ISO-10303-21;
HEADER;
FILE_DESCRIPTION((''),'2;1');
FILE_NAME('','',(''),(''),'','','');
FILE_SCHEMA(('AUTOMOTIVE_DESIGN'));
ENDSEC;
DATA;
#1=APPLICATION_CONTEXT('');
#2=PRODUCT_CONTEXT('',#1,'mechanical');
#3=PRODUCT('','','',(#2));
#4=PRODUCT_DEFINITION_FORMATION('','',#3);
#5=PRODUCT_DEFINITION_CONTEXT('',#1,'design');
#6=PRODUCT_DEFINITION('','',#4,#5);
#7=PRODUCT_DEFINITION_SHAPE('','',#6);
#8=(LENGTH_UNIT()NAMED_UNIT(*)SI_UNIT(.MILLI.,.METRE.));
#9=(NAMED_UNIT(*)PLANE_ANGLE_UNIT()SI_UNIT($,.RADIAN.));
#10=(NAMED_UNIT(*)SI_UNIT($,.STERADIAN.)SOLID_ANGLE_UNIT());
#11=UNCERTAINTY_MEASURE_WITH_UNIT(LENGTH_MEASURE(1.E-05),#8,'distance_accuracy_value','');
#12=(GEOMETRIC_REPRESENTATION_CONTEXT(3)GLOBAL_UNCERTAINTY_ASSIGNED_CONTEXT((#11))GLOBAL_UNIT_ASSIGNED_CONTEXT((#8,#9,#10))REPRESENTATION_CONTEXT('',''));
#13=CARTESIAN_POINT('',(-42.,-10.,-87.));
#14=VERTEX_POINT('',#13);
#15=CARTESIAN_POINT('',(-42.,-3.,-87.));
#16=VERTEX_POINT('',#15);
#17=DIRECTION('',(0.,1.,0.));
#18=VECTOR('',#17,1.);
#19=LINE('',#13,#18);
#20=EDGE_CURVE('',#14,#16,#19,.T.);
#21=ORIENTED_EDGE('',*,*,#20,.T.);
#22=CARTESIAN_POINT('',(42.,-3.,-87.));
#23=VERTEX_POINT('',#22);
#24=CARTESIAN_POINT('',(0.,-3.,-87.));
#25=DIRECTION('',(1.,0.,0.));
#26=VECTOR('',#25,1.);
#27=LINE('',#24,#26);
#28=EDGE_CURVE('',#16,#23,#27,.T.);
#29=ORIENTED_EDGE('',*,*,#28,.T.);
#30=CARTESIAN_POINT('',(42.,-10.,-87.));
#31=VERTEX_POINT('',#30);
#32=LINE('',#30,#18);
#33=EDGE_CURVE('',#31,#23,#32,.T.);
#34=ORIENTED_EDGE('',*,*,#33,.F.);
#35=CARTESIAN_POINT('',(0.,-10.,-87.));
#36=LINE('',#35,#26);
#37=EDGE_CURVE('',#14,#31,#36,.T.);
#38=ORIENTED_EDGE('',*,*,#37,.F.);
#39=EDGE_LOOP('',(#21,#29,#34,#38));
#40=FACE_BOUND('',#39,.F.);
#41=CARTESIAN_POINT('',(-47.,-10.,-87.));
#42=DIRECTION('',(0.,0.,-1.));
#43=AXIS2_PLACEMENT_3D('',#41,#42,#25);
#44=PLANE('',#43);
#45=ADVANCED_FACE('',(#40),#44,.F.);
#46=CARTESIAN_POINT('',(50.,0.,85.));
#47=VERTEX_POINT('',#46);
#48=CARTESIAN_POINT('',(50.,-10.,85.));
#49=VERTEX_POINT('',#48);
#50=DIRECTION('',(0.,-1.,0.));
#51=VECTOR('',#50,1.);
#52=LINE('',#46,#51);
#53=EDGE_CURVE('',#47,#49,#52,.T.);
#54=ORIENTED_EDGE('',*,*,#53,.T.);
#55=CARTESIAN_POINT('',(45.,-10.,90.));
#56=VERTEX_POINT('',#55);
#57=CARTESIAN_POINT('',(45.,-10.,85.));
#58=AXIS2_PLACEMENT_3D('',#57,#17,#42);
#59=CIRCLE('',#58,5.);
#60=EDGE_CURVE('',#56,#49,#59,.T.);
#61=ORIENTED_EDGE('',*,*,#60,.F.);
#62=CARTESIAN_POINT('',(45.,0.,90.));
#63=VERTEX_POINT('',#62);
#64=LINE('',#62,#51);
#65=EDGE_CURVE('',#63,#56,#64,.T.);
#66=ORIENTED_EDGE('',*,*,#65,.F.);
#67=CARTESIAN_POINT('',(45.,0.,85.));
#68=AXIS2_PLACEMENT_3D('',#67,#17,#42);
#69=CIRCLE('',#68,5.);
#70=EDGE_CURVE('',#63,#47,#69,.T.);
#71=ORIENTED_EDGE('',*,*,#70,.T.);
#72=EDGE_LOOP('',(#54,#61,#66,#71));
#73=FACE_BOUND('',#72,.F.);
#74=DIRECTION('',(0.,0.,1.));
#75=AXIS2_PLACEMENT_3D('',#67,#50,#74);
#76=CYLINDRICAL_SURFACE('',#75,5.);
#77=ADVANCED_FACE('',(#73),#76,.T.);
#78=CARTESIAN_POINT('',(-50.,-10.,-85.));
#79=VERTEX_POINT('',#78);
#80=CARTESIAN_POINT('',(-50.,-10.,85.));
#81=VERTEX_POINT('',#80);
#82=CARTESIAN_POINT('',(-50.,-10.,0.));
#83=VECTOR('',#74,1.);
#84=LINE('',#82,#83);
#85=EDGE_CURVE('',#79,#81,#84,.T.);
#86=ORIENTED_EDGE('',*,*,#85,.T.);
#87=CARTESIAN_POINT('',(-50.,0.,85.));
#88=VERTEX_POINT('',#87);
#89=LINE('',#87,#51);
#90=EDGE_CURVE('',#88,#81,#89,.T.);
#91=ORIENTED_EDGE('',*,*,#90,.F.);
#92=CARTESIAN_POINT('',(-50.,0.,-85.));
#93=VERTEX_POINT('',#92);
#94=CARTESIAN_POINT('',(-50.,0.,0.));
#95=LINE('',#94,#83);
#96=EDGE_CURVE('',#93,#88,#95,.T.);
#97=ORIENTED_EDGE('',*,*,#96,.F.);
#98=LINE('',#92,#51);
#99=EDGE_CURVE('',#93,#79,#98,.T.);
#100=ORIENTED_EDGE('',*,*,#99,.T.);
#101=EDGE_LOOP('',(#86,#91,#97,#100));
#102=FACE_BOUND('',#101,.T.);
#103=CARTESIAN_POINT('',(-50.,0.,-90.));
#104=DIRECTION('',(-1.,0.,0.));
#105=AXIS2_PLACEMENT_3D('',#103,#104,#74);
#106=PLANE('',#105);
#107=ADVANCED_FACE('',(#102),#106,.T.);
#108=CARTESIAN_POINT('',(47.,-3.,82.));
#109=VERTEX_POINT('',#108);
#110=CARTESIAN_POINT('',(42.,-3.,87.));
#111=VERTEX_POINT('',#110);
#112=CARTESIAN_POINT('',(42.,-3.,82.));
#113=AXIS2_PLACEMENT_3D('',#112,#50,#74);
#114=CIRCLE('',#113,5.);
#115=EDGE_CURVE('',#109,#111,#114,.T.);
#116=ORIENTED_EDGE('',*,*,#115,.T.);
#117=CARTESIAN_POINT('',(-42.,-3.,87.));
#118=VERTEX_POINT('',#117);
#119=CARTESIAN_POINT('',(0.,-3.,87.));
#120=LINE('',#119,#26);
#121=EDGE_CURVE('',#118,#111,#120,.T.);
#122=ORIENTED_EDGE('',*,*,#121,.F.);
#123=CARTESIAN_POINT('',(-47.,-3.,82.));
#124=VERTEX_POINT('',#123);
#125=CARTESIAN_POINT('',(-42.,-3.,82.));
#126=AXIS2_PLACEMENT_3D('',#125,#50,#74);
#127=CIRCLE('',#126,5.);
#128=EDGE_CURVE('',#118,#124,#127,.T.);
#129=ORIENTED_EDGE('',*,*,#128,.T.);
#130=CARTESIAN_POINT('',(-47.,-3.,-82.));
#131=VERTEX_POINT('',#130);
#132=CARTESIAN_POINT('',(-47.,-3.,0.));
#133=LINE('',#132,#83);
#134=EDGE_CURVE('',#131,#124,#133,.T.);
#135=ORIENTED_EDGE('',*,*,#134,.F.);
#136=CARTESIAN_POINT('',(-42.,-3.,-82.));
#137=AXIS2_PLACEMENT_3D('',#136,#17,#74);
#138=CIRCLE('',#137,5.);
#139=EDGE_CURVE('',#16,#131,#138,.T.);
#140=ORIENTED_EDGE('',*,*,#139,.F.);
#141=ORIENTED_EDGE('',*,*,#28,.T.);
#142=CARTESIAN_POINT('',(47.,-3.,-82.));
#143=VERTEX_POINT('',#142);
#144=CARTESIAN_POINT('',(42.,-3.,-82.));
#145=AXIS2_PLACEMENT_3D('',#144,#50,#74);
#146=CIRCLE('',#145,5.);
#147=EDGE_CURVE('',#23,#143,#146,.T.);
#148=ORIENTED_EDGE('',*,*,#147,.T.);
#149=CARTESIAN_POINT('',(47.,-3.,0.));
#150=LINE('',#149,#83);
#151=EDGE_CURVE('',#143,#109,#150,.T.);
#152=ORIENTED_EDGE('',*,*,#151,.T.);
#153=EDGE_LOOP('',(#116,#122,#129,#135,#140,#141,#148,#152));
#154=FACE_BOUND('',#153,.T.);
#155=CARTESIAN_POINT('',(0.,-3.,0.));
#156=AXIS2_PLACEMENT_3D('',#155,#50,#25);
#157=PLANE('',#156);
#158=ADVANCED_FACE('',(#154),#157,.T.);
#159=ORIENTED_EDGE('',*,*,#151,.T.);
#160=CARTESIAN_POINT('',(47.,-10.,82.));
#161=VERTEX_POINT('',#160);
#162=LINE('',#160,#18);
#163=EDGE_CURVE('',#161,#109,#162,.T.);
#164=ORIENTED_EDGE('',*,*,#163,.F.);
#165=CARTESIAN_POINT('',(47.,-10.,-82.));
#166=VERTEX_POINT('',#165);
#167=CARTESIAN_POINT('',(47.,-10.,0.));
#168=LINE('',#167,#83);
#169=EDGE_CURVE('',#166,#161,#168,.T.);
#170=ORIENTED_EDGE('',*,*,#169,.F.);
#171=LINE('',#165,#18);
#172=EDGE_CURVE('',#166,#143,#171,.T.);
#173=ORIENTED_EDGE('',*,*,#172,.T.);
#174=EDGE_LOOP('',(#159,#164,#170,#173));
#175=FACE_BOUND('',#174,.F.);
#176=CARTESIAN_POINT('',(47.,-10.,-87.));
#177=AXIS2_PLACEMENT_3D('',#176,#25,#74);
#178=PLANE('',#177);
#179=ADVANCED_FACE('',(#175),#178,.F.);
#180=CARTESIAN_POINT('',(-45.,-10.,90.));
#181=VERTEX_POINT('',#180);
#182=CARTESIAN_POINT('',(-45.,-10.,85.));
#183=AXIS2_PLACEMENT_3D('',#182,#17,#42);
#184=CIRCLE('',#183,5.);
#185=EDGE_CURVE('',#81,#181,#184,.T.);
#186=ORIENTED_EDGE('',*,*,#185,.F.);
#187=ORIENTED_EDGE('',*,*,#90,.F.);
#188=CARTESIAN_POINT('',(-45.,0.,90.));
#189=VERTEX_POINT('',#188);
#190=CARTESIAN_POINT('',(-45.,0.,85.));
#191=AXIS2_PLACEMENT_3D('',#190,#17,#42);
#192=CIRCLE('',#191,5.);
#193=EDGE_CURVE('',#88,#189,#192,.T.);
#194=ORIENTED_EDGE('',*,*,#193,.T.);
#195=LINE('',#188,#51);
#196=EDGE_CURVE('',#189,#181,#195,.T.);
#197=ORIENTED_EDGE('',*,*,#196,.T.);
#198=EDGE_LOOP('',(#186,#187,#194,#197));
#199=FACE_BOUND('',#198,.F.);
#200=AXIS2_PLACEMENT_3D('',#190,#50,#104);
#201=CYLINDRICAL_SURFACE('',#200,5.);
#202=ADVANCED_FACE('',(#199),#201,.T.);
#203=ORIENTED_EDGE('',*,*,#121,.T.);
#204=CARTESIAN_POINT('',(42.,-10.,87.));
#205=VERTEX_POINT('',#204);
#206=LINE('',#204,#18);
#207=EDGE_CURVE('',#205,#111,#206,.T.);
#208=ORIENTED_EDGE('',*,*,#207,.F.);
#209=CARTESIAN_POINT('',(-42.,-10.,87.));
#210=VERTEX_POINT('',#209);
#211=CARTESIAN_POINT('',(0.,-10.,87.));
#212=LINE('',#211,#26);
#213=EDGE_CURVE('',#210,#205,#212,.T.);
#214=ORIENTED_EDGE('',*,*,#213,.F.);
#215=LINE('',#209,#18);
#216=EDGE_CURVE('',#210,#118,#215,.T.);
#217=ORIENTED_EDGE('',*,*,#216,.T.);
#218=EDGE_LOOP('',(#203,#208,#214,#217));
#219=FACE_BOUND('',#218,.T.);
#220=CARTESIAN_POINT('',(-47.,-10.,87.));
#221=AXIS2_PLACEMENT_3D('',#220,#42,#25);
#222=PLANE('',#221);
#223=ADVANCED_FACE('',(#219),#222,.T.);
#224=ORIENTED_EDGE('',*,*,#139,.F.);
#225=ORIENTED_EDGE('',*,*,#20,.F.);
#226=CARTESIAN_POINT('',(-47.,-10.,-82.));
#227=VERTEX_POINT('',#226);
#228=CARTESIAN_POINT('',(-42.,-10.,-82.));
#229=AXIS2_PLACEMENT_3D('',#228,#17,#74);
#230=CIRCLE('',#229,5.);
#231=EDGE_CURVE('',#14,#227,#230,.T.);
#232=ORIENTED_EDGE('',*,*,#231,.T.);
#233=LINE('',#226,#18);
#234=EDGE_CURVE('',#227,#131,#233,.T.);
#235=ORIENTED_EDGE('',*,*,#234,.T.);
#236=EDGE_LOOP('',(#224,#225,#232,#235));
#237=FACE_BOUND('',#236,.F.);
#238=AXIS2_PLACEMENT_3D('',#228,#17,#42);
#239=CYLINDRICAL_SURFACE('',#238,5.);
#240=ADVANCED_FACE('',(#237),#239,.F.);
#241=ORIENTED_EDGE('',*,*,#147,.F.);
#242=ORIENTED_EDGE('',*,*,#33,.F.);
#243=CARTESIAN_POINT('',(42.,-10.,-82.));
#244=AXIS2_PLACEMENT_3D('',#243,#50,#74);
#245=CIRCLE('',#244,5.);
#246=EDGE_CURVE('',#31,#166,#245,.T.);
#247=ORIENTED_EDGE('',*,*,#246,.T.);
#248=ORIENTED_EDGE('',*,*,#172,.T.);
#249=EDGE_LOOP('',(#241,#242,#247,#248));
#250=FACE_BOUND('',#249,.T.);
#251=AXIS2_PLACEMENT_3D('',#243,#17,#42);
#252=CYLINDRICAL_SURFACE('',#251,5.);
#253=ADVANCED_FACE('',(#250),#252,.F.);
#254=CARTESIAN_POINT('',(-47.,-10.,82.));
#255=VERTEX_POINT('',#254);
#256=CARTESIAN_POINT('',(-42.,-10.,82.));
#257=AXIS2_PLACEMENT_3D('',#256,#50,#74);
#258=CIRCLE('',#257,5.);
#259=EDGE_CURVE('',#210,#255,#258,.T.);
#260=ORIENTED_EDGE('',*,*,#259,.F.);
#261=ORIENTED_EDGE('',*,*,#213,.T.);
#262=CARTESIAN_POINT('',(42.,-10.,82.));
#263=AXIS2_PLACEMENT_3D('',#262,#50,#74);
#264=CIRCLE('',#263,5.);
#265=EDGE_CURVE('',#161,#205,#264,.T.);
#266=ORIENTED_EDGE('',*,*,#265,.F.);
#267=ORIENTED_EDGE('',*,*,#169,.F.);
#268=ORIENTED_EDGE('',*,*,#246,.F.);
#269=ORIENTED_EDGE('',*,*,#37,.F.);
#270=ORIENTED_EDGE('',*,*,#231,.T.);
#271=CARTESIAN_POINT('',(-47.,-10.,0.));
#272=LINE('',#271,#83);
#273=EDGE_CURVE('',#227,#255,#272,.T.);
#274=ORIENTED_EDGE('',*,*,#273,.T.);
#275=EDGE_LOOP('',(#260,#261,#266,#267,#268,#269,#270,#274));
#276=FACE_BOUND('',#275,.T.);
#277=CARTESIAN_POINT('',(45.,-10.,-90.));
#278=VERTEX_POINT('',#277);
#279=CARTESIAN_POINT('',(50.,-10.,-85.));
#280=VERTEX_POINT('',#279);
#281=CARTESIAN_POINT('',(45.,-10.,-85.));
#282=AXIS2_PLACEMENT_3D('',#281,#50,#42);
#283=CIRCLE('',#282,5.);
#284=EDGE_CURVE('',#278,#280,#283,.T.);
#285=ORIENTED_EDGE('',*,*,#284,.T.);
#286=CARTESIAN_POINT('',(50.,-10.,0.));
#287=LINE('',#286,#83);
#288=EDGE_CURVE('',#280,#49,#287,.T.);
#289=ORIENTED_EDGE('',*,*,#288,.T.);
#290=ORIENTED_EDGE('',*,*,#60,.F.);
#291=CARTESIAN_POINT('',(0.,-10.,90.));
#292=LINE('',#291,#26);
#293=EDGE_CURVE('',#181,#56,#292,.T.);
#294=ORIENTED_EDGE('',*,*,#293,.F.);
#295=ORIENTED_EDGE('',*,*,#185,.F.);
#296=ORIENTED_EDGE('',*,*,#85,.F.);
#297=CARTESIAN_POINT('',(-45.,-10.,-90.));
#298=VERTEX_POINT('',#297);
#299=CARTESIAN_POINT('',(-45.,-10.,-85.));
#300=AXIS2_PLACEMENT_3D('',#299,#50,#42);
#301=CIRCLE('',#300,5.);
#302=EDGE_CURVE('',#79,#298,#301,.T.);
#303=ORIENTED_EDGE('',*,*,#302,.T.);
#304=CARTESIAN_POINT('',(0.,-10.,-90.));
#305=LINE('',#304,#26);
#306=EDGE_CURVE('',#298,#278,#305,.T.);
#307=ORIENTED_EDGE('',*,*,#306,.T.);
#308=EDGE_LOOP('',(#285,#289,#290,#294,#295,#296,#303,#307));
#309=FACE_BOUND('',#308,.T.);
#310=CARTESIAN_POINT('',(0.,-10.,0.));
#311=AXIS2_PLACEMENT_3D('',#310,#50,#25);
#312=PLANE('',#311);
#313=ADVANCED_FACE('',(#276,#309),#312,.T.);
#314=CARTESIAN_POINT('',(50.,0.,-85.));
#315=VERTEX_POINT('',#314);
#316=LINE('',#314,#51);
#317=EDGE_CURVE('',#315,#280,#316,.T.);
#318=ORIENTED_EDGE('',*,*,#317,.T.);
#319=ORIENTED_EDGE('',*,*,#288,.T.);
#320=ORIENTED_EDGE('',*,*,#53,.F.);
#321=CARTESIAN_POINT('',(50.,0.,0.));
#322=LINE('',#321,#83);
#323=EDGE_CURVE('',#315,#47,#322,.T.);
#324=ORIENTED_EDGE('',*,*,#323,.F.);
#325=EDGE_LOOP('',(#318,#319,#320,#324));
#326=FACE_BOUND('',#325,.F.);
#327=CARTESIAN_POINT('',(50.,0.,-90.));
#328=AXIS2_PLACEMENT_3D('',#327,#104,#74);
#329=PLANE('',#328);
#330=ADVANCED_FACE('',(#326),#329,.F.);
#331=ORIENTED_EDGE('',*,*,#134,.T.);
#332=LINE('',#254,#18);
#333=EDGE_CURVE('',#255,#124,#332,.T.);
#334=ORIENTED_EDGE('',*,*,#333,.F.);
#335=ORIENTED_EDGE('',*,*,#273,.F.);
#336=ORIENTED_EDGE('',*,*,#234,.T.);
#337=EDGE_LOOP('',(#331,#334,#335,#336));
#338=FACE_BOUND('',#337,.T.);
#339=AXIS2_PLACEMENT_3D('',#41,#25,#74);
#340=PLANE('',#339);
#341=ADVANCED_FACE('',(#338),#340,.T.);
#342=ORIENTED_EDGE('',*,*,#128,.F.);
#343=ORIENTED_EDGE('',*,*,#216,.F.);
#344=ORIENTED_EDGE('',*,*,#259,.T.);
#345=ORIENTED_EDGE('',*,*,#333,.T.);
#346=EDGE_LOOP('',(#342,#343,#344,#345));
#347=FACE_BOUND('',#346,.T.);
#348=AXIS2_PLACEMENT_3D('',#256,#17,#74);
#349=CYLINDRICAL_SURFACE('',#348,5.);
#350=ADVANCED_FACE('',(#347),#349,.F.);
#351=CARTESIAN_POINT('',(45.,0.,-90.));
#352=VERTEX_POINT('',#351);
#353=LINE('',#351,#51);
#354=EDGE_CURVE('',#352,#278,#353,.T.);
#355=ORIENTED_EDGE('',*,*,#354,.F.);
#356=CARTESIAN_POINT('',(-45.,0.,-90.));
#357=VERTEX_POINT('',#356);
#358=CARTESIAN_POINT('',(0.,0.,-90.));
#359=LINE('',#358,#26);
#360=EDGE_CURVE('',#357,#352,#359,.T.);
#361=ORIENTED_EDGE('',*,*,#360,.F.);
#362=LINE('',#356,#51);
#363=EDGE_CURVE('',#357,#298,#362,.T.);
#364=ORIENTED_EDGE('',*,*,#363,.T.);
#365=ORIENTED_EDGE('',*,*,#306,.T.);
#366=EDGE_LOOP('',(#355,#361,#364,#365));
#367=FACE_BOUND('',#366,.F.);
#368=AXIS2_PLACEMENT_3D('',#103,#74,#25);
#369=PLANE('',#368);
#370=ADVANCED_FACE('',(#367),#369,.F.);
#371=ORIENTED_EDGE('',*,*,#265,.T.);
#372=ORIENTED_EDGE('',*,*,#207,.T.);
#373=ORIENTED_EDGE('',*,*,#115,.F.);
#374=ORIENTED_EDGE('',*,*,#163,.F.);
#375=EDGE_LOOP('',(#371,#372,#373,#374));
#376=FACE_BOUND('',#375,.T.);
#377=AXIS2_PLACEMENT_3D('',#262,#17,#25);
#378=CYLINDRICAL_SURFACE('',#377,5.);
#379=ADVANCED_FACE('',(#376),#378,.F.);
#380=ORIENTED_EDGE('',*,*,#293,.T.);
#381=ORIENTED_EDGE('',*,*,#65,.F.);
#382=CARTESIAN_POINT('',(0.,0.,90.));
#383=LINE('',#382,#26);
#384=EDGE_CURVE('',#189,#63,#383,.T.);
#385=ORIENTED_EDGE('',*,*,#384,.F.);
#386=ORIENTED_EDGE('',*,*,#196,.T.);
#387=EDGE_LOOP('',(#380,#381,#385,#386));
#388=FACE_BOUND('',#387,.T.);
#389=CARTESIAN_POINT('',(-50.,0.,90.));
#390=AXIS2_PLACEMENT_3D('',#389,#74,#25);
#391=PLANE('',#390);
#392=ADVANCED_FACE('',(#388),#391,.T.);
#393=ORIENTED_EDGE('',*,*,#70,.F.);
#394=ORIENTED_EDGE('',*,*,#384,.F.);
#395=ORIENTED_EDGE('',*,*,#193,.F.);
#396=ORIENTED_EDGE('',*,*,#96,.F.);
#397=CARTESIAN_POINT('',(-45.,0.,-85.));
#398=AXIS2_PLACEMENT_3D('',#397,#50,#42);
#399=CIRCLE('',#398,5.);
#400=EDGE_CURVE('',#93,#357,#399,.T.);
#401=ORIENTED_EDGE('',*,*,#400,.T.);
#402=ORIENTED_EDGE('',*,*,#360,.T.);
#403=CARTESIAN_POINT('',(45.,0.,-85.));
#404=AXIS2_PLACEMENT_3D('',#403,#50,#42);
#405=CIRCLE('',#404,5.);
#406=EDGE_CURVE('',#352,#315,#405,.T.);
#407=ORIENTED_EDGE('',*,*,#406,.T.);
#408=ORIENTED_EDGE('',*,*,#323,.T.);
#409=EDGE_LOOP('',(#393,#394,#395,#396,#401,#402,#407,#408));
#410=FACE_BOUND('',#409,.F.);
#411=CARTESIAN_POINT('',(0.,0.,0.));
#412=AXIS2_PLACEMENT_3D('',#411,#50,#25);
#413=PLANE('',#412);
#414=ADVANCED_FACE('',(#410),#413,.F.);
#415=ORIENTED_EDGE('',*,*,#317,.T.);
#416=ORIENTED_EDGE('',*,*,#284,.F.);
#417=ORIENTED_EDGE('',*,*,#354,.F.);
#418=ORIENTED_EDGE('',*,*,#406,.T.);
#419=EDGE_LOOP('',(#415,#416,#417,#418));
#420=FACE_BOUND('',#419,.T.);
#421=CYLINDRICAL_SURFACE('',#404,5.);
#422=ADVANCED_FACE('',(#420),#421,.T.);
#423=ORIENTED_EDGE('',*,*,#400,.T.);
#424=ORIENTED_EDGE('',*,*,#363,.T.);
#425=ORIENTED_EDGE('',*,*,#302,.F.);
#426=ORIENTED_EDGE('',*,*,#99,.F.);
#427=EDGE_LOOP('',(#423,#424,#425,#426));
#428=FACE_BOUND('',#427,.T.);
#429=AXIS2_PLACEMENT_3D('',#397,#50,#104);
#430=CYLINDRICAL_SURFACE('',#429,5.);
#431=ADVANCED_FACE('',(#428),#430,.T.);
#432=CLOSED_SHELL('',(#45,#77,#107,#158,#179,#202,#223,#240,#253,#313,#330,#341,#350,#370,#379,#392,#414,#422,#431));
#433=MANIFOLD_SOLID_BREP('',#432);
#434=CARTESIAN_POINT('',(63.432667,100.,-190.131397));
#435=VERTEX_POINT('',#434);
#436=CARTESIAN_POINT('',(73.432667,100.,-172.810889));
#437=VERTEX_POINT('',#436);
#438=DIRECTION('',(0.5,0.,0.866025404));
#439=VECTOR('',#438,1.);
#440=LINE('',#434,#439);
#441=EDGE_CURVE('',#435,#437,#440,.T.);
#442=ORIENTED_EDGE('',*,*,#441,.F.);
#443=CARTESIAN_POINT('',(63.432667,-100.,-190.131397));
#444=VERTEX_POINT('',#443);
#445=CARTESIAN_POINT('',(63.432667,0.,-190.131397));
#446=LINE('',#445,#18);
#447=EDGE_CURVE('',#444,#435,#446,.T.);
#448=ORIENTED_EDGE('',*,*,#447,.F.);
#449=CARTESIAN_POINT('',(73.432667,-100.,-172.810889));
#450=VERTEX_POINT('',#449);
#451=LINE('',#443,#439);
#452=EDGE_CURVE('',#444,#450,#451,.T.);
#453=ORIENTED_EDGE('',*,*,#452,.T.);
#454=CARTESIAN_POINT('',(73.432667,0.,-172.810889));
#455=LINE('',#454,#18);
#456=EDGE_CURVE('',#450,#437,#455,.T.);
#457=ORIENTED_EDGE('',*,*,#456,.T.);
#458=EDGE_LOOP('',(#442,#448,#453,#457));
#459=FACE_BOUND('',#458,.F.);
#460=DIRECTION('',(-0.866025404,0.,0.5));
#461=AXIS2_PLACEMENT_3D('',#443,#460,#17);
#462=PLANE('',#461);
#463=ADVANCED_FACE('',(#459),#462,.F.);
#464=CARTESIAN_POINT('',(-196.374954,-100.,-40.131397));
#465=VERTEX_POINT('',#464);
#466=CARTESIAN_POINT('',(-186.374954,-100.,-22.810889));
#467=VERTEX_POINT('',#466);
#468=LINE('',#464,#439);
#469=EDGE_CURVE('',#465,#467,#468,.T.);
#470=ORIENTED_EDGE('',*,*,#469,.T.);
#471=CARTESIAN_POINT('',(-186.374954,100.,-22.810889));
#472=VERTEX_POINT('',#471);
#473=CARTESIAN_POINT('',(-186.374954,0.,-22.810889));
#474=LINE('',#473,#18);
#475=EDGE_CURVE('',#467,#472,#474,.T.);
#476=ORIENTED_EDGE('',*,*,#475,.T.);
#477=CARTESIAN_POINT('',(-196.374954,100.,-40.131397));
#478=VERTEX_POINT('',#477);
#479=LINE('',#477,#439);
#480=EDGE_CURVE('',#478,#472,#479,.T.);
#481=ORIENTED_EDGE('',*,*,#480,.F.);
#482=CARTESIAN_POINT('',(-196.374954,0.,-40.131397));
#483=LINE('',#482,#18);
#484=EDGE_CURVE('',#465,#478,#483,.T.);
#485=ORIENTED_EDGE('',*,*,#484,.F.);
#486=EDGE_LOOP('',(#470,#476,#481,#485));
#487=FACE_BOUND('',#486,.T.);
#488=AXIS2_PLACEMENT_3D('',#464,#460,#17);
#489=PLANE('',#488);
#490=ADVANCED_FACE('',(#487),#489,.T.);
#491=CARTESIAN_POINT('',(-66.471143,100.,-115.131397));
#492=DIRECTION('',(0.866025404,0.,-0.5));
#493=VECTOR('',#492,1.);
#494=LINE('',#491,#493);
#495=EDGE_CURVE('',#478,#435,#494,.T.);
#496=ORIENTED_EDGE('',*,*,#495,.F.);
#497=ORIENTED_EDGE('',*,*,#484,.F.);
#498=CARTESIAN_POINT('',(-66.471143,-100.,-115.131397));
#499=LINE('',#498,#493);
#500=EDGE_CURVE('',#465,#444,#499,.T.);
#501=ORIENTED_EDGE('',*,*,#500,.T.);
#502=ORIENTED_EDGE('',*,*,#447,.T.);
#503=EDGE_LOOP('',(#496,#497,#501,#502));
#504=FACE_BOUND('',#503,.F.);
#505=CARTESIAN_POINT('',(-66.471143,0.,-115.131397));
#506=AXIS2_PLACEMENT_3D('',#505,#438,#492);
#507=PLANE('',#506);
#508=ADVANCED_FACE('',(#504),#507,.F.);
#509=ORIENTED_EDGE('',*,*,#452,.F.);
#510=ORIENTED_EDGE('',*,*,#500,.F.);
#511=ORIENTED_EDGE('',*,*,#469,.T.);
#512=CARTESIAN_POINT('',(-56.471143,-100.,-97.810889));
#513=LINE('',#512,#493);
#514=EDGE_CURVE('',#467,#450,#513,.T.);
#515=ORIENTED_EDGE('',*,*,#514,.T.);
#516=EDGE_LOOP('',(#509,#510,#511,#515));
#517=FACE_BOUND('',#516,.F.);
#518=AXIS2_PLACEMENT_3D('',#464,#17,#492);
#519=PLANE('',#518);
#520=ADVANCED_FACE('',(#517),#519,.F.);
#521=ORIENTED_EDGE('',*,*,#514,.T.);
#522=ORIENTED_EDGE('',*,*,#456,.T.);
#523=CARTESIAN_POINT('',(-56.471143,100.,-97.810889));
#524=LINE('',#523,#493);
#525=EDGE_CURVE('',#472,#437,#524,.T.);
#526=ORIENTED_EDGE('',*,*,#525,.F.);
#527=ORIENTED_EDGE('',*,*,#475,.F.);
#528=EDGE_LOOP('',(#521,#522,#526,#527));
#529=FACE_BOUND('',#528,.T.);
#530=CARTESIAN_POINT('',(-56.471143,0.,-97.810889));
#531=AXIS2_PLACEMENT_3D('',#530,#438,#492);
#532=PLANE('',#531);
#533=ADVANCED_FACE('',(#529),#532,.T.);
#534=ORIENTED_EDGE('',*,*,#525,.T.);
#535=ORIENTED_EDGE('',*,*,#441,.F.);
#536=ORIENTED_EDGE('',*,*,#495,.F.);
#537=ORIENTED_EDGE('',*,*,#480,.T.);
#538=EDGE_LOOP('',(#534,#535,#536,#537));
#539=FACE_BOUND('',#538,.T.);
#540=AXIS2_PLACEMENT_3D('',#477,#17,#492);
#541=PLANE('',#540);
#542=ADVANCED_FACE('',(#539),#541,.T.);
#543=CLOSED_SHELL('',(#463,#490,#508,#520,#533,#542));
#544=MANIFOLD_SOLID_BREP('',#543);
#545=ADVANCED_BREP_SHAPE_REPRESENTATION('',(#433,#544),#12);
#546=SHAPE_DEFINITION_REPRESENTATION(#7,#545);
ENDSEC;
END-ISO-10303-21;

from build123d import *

# Parameters (mm, degrees)
F0_W     = 100
F0_H     = 180
F1_DEPTH = 10
F2_W     = 94
F2_H     = 174
F3_DEPTH = 7
F6_W     = 300
F6_H     = 200
F7_DEPTH = 20
F8_R     = 5


with BuildPart() as f1:
    # F0 (on Front) → F1 (new body)
    with BuildSketch(Plane.XZ):
        Rectangle(F0_W, F0_H)
    extrude(amount=F1_DEPTH)

    # F2 (on face) → F3 (cut)
    with BuildSketch(Plane.XZ.offset(10)):
        Rectangle(F2_W, F2_H)
    extrude(amount=-F3_DEPTH, mode=Mode.SUBTRACT)

    # F8
    f8_edges = [f1.edges().sort_by_distance(p)[0] for p in [
        (-47, -6.5, -87),
        (50, -5, 90),
        (-50, -5, 90),
        (-47, -6.5, 87),
        (47, -6.5, -87),
        (-50, -5, -90),
        (47, -6.5, 87),
        (50, -5, -90),
    ]]
    fillet(f8_edges, radius=F8_R)


with BuildPart() as f7:
    # F6 (on face) → F7 (new body)
    with BuildSketch(Plane(origin=(-66.4711431703, 0, -115.1313972081), x_dir=(0.8660254038, 0, -0.5), z_dir=(0.5, 0, 0.8660254038))):
        Rectangle(F6_W, F6_H)
    extrude(amount=F7_DEPTH)


solid = Compound([f1.part, f7.part])
